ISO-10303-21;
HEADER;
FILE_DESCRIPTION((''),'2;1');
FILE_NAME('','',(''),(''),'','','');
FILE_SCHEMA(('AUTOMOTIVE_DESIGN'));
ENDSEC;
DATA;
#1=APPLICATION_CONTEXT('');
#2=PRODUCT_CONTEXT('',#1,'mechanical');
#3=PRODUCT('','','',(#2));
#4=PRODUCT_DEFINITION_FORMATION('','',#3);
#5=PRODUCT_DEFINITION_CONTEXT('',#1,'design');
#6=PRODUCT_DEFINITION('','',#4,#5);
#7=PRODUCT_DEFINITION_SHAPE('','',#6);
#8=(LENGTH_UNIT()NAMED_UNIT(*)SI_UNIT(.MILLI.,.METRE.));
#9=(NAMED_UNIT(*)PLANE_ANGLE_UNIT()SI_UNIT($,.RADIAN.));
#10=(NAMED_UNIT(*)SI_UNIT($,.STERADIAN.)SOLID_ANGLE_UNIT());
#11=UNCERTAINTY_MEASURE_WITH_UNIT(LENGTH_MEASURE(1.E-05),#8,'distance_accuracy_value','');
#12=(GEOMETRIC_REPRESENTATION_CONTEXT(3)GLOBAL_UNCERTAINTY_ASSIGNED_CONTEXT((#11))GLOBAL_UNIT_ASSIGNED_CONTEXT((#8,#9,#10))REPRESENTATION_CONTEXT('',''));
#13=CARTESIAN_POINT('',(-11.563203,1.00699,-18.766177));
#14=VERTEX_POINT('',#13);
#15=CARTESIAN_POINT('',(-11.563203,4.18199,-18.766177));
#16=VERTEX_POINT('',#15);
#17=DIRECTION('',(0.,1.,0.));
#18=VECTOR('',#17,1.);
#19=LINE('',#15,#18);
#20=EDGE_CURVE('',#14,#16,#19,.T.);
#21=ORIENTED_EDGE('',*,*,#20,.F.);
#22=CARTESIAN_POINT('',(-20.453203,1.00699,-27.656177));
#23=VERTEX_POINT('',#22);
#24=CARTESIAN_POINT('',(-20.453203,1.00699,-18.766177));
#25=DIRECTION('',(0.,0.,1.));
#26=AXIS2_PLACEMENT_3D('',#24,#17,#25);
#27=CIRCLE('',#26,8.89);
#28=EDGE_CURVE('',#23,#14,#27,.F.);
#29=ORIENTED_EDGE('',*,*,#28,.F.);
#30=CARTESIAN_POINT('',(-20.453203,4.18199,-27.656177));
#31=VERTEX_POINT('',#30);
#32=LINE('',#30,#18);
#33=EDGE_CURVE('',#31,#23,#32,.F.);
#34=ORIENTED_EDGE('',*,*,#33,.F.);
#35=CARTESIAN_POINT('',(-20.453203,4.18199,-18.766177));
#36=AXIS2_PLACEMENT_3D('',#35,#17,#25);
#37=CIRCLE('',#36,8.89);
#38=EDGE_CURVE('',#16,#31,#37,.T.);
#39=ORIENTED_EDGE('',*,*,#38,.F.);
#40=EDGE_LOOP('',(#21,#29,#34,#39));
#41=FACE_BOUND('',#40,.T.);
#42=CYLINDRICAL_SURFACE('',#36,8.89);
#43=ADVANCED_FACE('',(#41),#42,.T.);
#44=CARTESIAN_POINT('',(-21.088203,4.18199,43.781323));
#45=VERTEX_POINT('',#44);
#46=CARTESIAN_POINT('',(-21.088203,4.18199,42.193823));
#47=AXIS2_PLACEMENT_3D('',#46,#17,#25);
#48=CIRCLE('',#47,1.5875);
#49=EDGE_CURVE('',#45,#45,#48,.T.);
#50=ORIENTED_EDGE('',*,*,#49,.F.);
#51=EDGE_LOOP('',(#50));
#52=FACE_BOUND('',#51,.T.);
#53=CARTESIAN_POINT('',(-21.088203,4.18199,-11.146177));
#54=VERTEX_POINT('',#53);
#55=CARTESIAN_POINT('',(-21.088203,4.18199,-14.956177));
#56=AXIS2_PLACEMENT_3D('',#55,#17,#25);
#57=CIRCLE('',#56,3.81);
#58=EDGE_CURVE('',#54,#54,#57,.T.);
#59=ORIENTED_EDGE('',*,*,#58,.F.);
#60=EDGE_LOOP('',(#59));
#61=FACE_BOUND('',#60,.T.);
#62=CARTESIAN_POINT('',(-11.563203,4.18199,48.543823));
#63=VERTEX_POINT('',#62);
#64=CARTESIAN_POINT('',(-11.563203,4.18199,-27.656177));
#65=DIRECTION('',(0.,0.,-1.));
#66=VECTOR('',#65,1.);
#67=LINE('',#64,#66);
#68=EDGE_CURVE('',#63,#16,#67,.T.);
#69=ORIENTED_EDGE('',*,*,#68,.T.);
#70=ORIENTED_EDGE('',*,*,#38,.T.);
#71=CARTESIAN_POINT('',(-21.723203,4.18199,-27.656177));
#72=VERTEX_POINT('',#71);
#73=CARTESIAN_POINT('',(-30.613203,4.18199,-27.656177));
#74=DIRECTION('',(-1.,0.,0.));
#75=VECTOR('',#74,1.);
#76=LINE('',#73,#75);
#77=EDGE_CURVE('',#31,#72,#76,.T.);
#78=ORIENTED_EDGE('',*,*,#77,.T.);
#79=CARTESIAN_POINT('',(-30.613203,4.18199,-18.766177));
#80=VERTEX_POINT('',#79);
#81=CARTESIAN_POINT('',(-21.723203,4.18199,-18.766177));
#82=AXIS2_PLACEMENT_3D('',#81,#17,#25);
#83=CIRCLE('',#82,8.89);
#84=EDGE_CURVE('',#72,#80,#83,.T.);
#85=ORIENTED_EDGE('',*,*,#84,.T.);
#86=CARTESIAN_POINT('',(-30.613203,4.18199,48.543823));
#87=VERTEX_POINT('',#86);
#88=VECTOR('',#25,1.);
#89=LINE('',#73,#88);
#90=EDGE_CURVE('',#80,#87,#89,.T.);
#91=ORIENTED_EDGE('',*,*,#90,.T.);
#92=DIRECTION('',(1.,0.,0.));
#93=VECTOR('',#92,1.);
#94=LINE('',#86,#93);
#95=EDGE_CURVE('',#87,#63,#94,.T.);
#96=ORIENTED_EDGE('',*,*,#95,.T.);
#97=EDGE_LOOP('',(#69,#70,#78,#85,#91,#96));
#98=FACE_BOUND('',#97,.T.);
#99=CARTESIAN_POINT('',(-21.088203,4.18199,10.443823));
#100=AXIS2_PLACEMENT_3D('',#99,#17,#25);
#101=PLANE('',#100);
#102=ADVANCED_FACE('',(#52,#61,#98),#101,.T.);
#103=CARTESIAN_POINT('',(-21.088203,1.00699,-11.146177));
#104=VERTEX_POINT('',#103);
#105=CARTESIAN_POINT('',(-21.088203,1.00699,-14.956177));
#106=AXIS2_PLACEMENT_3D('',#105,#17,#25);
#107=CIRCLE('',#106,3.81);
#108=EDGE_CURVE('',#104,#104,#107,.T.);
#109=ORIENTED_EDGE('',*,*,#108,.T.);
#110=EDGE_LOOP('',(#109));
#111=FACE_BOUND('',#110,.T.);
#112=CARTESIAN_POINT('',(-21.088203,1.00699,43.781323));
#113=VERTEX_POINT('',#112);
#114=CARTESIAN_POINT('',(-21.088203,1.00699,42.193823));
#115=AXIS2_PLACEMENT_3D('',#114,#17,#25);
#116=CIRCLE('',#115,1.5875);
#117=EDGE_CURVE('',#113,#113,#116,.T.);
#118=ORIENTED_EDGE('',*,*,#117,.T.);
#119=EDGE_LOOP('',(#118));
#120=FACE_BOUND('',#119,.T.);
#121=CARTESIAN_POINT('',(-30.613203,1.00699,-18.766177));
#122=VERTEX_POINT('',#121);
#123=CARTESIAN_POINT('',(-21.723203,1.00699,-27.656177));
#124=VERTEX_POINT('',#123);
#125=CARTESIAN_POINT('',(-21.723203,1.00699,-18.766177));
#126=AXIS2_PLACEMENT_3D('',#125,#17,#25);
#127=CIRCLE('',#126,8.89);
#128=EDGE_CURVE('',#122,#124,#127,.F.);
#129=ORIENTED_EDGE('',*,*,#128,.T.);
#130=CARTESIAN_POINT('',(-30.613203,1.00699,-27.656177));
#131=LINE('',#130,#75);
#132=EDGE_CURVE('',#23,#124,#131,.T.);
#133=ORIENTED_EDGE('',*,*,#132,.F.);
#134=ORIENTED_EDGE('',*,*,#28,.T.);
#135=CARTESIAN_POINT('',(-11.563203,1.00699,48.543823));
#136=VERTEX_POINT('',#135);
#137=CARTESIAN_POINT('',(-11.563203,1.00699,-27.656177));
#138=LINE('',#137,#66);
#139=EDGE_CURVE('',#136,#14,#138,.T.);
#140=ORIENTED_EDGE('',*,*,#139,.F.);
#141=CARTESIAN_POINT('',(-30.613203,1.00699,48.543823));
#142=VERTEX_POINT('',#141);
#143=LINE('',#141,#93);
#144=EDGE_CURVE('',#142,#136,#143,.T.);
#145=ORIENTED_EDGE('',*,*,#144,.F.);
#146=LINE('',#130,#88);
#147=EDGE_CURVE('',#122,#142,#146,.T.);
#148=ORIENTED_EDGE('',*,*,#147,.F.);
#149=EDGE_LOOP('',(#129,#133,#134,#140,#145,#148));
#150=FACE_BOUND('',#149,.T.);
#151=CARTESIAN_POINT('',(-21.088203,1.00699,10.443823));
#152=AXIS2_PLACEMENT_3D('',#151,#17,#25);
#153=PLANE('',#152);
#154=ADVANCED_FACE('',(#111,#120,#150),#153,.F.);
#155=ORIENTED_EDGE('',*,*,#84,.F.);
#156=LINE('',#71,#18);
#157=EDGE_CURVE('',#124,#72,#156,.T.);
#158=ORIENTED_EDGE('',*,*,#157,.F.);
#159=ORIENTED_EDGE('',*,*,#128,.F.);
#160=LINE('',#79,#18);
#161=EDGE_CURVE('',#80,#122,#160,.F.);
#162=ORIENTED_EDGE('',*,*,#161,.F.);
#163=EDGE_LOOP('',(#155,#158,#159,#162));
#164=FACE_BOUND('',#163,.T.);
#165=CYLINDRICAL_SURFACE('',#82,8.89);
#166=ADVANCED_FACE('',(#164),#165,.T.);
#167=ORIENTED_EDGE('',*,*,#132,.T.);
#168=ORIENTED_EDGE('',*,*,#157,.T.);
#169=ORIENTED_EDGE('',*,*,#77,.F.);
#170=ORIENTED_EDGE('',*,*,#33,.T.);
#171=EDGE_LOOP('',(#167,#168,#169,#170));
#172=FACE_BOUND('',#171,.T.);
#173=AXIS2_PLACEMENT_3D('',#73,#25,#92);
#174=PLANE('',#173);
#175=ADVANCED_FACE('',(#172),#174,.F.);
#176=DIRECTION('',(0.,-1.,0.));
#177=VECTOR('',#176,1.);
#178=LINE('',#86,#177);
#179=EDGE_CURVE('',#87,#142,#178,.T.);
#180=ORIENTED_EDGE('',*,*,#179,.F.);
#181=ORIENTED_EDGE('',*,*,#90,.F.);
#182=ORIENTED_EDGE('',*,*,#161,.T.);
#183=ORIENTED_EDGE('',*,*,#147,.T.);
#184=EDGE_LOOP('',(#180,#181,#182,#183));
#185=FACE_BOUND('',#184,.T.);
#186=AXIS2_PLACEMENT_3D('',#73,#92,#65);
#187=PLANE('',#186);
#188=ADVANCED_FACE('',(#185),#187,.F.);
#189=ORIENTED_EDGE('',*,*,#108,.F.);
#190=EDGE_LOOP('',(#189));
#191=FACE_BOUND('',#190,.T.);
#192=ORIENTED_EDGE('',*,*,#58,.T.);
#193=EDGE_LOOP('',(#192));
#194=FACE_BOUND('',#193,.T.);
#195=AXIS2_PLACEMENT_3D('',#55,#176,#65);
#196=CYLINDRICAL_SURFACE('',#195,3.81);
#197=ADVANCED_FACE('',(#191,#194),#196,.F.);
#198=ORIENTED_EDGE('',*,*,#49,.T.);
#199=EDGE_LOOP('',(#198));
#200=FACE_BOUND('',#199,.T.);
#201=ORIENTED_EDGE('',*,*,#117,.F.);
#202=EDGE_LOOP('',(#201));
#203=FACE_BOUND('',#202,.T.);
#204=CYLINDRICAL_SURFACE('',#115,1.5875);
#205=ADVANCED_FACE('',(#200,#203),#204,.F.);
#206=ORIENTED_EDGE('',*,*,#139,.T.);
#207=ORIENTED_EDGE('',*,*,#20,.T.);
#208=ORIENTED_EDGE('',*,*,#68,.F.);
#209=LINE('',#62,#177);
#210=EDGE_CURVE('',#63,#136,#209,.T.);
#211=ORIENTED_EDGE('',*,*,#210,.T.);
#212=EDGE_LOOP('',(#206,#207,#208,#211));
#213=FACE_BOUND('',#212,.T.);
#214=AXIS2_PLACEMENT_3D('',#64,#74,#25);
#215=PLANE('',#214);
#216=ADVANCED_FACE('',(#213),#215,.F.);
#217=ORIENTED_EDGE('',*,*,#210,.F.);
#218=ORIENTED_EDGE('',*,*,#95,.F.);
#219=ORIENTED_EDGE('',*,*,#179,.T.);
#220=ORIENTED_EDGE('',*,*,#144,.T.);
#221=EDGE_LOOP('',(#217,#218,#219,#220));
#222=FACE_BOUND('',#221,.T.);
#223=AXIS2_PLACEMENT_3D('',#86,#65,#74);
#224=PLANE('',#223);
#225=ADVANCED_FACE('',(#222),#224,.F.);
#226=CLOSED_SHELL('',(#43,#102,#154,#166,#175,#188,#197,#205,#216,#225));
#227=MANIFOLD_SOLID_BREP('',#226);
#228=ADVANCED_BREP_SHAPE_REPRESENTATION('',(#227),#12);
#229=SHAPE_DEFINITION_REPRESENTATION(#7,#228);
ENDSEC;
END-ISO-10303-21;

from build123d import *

# Parameters (mm, degrees)
STEM_START                = 1.006990195
STEM_OTHER_SIDE_OUTLINE_R = 3.81
STEM_OTHER_SIDE_DEPTH     = 3.175
SKETCH1_R                 = 1.5875
CUT_EXTRUDE1_DEPTH        = 3.175


# Read off the part's stored shape, not the designer's step: Stem Other Side
with BuildPart() as part:
    # Stem Other Side outline → Stem Other Side (new body)
    with BuildSketch(Plane(origin=(0, 0, 0), x_dir=(1, 0, 0), z_dir=(0, 1, 0)).offset(STEM_START)):
        with BuildLine():
            Line((-20.453203013, 27.656176961), (-21.723203013, 27.656176961))
            ThreePointArc((-21.723203013, 27.656176961), (-28.009382298, 25.052356246), (-30.613203013, 18.766176961))
            Line((-30.613203013, 18.766176961), (-30.613203013, -48.543823039))
            Line((-30.613203013, -48.543823039), (-11.563203013, -48.543823039))
            Line((-11.563203013, -48.543823039), (-11.563203013, 18.766176961))
            ThreePointArc((-11.563203013, 18.766176961), (-14.167023728, 25.052356246), (-20.453203013, 27.656176961))
        make_face()
        with Locations((-21.088203013, 14.956176961)):
            Circle(STEM_OTHER_SIDE_OUTLINE_R, mode=Mode.SUBTRACT)
    extrude(amount=STEM_OTHER_SIDE_DEPTH)

    # Sketch1 → Cut-Extrude1 (cut)
    with BuildSketch(Plane(origin=(0, 4.181990195, 0), x_dir=(1, 0, 0), z_dir=(0, 1, 0))):
        with Locations(Location((-21.088203013, -42.193823039, 0), (0, 0, 270))):
            Circle(SKETCH1_R)
    extrude(amount=-CUT_EXTRUDE1_DEPTH, mode=Mode.SUBTRACT)


solid = part.part
